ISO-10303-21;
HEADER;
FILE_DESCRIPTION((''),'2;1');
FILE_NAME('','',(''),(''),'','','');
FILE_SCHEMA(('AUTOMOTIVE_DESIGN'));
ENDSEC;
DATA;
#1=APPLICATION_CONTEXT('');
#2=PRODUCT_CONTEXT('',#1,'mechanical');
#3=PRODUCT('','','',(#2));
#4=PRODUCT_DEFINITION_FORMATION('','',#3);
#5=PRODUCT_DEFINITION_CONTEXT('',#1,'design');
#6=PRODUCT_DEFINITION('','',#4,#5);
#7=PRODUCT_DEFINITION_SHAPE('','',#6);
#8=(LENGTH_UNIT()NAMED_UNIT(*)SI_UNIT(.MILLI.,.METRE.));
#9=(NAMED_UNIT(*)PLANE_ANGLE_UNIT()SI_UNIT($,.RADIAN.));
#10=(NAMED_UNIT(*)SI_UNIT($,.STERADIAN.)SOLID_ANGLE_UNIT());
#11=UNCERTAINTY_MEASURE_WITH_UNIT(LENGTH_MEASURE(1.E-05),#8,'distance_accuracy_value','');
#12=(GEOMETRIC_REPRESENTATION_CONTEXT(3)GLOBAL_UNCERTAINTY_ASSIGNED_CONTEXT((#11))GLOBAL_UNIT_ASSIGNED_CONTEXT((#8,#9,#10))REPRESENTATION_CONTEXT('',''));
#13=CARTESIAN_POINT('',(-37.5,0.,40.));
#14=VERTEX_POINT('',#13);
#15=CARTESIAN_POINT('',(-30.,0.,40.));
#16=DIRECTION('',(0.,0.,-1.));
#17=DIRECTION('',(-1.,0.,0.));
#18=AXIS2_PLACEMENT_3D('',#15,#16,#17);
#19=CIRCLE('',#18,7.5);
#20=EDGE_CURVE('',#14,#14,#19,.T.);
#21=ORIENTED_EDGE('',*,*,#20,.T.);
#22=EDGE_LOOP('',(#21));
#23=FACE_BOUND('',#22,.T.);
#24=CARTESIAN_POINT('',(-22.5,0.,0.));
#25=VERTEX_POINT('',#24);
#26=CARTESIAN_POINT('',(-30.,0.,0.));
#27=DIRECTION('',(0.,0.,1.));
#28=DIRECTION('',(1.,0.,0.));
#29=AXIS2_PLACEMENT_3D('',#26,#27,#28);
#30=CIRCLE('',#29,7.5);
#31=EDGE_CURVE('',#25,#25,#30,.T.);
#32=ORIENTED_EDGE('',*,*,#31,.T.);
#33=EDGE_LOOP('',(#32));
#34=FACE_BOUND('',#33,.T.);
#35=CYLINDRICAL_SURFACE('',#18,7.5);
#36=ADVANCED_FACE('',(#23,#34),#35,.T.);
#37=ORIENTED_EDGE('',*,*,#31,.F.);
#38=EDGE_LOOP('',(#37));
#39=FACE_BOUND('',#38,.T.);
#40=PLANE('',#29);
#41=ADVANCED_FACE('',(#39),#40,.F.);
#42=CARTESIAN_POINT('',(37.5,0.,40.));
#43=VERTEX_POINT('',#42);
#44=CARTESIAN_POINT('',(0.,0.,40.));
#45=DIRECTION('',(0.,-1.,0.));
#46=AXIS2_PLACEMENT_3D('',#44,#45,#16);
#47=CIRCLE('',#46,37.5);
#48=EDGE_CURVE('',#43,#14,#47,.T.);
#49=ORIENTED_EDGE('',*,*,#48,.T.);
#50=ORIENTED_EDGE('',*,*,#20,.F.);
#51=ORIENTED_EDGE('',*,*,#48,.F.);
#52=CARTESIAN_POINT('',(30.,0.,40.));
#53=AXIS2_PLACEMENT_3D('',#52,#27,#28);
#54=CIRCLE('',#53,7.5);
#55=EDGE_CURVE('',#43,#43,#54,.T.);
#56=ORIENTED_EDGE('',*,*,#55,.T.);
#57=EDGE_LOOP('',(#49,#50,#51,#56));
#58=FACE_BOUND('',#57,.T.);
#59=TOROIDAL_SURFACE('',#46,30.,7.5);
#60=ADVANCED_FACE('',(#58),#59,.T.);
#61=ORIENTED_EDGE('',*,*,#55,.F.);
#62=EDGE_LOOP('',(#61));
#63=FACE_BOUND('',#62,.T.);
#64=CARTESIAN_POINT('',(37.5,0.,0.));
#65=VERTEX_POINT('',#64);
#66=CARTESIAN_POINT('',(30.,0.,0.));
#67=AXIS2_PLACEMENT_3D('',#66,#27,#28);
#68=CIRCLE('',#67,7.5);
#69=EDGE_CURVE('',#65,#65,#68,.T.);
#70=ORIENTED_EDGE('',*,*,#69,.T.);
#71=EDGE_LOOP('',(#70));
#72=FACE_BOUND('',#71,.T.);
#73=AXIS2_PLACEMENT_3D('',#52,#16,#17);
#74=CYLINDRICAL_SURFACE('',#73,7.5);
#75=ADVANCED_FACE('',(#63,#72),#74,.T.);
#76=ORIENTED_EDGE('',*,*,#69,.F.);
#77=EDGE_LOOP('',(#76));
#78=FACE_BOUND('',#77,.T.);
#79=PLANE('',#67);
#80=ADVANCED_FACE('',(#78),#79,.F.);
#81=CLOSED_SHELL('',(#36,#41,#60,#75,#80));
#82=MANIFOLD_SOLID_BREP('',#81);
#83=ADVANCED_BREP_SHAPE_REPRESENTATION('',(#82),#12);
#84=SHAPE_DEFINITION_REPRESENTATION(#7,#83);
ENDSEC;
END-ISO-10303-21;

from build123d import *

# Parameters (mm, degrees)
SKETCH1_R             = 7.5
BOSS_EXTRUDE1_DEPTH   = 40
BOSS_EXTRUDE1_2_DEPTH = 40
SWEEP1_OUTLINE_R      = 7.5
SWEEP1_ANGLE          = 180


# Read off the part's stored shape, not the designer's step: Sweep1
with BuildPart() as part:
    # Sketch1 → Boss-Extrude1 (new body)
    with BuildSketch(Plane.XY):
        with Locations((30, 0)):
            Circle(SKETCH1_R)
    extrude(amount=BOSS_EXTRUDE1_DEPTH)



with BuildPart() as body_2:
    # Sketch1 → Boss-Extrude1 2 (new body)
    with BuildSketch(Plane.XY):
        with Locations((-30, 0)):
            Circle(SKETCH1_R)
    extrude(amount=BOSS_EXTRUDE1_2_DEPTH)


with BuildPart() as part_1:
    add(part.part)

    add(body_2.part)  # Sweep1 merges body 2
    # Sweep1 outline → Sweep1 (revolve)
    with BuildSketch(Plane(origin=(0, 0, 40), x_dir=(-1, 0, 0), z_dir=(0, 0, -1))):
        with Locations((30, 0)):
            Circle(SWEEP1_OUTLINE_R)
    revolve(axis=Axis((0, 0, 40), (0, 1, 0)), revolution_arc=SWEEP1_ANGLE)


solid = part_1.part
